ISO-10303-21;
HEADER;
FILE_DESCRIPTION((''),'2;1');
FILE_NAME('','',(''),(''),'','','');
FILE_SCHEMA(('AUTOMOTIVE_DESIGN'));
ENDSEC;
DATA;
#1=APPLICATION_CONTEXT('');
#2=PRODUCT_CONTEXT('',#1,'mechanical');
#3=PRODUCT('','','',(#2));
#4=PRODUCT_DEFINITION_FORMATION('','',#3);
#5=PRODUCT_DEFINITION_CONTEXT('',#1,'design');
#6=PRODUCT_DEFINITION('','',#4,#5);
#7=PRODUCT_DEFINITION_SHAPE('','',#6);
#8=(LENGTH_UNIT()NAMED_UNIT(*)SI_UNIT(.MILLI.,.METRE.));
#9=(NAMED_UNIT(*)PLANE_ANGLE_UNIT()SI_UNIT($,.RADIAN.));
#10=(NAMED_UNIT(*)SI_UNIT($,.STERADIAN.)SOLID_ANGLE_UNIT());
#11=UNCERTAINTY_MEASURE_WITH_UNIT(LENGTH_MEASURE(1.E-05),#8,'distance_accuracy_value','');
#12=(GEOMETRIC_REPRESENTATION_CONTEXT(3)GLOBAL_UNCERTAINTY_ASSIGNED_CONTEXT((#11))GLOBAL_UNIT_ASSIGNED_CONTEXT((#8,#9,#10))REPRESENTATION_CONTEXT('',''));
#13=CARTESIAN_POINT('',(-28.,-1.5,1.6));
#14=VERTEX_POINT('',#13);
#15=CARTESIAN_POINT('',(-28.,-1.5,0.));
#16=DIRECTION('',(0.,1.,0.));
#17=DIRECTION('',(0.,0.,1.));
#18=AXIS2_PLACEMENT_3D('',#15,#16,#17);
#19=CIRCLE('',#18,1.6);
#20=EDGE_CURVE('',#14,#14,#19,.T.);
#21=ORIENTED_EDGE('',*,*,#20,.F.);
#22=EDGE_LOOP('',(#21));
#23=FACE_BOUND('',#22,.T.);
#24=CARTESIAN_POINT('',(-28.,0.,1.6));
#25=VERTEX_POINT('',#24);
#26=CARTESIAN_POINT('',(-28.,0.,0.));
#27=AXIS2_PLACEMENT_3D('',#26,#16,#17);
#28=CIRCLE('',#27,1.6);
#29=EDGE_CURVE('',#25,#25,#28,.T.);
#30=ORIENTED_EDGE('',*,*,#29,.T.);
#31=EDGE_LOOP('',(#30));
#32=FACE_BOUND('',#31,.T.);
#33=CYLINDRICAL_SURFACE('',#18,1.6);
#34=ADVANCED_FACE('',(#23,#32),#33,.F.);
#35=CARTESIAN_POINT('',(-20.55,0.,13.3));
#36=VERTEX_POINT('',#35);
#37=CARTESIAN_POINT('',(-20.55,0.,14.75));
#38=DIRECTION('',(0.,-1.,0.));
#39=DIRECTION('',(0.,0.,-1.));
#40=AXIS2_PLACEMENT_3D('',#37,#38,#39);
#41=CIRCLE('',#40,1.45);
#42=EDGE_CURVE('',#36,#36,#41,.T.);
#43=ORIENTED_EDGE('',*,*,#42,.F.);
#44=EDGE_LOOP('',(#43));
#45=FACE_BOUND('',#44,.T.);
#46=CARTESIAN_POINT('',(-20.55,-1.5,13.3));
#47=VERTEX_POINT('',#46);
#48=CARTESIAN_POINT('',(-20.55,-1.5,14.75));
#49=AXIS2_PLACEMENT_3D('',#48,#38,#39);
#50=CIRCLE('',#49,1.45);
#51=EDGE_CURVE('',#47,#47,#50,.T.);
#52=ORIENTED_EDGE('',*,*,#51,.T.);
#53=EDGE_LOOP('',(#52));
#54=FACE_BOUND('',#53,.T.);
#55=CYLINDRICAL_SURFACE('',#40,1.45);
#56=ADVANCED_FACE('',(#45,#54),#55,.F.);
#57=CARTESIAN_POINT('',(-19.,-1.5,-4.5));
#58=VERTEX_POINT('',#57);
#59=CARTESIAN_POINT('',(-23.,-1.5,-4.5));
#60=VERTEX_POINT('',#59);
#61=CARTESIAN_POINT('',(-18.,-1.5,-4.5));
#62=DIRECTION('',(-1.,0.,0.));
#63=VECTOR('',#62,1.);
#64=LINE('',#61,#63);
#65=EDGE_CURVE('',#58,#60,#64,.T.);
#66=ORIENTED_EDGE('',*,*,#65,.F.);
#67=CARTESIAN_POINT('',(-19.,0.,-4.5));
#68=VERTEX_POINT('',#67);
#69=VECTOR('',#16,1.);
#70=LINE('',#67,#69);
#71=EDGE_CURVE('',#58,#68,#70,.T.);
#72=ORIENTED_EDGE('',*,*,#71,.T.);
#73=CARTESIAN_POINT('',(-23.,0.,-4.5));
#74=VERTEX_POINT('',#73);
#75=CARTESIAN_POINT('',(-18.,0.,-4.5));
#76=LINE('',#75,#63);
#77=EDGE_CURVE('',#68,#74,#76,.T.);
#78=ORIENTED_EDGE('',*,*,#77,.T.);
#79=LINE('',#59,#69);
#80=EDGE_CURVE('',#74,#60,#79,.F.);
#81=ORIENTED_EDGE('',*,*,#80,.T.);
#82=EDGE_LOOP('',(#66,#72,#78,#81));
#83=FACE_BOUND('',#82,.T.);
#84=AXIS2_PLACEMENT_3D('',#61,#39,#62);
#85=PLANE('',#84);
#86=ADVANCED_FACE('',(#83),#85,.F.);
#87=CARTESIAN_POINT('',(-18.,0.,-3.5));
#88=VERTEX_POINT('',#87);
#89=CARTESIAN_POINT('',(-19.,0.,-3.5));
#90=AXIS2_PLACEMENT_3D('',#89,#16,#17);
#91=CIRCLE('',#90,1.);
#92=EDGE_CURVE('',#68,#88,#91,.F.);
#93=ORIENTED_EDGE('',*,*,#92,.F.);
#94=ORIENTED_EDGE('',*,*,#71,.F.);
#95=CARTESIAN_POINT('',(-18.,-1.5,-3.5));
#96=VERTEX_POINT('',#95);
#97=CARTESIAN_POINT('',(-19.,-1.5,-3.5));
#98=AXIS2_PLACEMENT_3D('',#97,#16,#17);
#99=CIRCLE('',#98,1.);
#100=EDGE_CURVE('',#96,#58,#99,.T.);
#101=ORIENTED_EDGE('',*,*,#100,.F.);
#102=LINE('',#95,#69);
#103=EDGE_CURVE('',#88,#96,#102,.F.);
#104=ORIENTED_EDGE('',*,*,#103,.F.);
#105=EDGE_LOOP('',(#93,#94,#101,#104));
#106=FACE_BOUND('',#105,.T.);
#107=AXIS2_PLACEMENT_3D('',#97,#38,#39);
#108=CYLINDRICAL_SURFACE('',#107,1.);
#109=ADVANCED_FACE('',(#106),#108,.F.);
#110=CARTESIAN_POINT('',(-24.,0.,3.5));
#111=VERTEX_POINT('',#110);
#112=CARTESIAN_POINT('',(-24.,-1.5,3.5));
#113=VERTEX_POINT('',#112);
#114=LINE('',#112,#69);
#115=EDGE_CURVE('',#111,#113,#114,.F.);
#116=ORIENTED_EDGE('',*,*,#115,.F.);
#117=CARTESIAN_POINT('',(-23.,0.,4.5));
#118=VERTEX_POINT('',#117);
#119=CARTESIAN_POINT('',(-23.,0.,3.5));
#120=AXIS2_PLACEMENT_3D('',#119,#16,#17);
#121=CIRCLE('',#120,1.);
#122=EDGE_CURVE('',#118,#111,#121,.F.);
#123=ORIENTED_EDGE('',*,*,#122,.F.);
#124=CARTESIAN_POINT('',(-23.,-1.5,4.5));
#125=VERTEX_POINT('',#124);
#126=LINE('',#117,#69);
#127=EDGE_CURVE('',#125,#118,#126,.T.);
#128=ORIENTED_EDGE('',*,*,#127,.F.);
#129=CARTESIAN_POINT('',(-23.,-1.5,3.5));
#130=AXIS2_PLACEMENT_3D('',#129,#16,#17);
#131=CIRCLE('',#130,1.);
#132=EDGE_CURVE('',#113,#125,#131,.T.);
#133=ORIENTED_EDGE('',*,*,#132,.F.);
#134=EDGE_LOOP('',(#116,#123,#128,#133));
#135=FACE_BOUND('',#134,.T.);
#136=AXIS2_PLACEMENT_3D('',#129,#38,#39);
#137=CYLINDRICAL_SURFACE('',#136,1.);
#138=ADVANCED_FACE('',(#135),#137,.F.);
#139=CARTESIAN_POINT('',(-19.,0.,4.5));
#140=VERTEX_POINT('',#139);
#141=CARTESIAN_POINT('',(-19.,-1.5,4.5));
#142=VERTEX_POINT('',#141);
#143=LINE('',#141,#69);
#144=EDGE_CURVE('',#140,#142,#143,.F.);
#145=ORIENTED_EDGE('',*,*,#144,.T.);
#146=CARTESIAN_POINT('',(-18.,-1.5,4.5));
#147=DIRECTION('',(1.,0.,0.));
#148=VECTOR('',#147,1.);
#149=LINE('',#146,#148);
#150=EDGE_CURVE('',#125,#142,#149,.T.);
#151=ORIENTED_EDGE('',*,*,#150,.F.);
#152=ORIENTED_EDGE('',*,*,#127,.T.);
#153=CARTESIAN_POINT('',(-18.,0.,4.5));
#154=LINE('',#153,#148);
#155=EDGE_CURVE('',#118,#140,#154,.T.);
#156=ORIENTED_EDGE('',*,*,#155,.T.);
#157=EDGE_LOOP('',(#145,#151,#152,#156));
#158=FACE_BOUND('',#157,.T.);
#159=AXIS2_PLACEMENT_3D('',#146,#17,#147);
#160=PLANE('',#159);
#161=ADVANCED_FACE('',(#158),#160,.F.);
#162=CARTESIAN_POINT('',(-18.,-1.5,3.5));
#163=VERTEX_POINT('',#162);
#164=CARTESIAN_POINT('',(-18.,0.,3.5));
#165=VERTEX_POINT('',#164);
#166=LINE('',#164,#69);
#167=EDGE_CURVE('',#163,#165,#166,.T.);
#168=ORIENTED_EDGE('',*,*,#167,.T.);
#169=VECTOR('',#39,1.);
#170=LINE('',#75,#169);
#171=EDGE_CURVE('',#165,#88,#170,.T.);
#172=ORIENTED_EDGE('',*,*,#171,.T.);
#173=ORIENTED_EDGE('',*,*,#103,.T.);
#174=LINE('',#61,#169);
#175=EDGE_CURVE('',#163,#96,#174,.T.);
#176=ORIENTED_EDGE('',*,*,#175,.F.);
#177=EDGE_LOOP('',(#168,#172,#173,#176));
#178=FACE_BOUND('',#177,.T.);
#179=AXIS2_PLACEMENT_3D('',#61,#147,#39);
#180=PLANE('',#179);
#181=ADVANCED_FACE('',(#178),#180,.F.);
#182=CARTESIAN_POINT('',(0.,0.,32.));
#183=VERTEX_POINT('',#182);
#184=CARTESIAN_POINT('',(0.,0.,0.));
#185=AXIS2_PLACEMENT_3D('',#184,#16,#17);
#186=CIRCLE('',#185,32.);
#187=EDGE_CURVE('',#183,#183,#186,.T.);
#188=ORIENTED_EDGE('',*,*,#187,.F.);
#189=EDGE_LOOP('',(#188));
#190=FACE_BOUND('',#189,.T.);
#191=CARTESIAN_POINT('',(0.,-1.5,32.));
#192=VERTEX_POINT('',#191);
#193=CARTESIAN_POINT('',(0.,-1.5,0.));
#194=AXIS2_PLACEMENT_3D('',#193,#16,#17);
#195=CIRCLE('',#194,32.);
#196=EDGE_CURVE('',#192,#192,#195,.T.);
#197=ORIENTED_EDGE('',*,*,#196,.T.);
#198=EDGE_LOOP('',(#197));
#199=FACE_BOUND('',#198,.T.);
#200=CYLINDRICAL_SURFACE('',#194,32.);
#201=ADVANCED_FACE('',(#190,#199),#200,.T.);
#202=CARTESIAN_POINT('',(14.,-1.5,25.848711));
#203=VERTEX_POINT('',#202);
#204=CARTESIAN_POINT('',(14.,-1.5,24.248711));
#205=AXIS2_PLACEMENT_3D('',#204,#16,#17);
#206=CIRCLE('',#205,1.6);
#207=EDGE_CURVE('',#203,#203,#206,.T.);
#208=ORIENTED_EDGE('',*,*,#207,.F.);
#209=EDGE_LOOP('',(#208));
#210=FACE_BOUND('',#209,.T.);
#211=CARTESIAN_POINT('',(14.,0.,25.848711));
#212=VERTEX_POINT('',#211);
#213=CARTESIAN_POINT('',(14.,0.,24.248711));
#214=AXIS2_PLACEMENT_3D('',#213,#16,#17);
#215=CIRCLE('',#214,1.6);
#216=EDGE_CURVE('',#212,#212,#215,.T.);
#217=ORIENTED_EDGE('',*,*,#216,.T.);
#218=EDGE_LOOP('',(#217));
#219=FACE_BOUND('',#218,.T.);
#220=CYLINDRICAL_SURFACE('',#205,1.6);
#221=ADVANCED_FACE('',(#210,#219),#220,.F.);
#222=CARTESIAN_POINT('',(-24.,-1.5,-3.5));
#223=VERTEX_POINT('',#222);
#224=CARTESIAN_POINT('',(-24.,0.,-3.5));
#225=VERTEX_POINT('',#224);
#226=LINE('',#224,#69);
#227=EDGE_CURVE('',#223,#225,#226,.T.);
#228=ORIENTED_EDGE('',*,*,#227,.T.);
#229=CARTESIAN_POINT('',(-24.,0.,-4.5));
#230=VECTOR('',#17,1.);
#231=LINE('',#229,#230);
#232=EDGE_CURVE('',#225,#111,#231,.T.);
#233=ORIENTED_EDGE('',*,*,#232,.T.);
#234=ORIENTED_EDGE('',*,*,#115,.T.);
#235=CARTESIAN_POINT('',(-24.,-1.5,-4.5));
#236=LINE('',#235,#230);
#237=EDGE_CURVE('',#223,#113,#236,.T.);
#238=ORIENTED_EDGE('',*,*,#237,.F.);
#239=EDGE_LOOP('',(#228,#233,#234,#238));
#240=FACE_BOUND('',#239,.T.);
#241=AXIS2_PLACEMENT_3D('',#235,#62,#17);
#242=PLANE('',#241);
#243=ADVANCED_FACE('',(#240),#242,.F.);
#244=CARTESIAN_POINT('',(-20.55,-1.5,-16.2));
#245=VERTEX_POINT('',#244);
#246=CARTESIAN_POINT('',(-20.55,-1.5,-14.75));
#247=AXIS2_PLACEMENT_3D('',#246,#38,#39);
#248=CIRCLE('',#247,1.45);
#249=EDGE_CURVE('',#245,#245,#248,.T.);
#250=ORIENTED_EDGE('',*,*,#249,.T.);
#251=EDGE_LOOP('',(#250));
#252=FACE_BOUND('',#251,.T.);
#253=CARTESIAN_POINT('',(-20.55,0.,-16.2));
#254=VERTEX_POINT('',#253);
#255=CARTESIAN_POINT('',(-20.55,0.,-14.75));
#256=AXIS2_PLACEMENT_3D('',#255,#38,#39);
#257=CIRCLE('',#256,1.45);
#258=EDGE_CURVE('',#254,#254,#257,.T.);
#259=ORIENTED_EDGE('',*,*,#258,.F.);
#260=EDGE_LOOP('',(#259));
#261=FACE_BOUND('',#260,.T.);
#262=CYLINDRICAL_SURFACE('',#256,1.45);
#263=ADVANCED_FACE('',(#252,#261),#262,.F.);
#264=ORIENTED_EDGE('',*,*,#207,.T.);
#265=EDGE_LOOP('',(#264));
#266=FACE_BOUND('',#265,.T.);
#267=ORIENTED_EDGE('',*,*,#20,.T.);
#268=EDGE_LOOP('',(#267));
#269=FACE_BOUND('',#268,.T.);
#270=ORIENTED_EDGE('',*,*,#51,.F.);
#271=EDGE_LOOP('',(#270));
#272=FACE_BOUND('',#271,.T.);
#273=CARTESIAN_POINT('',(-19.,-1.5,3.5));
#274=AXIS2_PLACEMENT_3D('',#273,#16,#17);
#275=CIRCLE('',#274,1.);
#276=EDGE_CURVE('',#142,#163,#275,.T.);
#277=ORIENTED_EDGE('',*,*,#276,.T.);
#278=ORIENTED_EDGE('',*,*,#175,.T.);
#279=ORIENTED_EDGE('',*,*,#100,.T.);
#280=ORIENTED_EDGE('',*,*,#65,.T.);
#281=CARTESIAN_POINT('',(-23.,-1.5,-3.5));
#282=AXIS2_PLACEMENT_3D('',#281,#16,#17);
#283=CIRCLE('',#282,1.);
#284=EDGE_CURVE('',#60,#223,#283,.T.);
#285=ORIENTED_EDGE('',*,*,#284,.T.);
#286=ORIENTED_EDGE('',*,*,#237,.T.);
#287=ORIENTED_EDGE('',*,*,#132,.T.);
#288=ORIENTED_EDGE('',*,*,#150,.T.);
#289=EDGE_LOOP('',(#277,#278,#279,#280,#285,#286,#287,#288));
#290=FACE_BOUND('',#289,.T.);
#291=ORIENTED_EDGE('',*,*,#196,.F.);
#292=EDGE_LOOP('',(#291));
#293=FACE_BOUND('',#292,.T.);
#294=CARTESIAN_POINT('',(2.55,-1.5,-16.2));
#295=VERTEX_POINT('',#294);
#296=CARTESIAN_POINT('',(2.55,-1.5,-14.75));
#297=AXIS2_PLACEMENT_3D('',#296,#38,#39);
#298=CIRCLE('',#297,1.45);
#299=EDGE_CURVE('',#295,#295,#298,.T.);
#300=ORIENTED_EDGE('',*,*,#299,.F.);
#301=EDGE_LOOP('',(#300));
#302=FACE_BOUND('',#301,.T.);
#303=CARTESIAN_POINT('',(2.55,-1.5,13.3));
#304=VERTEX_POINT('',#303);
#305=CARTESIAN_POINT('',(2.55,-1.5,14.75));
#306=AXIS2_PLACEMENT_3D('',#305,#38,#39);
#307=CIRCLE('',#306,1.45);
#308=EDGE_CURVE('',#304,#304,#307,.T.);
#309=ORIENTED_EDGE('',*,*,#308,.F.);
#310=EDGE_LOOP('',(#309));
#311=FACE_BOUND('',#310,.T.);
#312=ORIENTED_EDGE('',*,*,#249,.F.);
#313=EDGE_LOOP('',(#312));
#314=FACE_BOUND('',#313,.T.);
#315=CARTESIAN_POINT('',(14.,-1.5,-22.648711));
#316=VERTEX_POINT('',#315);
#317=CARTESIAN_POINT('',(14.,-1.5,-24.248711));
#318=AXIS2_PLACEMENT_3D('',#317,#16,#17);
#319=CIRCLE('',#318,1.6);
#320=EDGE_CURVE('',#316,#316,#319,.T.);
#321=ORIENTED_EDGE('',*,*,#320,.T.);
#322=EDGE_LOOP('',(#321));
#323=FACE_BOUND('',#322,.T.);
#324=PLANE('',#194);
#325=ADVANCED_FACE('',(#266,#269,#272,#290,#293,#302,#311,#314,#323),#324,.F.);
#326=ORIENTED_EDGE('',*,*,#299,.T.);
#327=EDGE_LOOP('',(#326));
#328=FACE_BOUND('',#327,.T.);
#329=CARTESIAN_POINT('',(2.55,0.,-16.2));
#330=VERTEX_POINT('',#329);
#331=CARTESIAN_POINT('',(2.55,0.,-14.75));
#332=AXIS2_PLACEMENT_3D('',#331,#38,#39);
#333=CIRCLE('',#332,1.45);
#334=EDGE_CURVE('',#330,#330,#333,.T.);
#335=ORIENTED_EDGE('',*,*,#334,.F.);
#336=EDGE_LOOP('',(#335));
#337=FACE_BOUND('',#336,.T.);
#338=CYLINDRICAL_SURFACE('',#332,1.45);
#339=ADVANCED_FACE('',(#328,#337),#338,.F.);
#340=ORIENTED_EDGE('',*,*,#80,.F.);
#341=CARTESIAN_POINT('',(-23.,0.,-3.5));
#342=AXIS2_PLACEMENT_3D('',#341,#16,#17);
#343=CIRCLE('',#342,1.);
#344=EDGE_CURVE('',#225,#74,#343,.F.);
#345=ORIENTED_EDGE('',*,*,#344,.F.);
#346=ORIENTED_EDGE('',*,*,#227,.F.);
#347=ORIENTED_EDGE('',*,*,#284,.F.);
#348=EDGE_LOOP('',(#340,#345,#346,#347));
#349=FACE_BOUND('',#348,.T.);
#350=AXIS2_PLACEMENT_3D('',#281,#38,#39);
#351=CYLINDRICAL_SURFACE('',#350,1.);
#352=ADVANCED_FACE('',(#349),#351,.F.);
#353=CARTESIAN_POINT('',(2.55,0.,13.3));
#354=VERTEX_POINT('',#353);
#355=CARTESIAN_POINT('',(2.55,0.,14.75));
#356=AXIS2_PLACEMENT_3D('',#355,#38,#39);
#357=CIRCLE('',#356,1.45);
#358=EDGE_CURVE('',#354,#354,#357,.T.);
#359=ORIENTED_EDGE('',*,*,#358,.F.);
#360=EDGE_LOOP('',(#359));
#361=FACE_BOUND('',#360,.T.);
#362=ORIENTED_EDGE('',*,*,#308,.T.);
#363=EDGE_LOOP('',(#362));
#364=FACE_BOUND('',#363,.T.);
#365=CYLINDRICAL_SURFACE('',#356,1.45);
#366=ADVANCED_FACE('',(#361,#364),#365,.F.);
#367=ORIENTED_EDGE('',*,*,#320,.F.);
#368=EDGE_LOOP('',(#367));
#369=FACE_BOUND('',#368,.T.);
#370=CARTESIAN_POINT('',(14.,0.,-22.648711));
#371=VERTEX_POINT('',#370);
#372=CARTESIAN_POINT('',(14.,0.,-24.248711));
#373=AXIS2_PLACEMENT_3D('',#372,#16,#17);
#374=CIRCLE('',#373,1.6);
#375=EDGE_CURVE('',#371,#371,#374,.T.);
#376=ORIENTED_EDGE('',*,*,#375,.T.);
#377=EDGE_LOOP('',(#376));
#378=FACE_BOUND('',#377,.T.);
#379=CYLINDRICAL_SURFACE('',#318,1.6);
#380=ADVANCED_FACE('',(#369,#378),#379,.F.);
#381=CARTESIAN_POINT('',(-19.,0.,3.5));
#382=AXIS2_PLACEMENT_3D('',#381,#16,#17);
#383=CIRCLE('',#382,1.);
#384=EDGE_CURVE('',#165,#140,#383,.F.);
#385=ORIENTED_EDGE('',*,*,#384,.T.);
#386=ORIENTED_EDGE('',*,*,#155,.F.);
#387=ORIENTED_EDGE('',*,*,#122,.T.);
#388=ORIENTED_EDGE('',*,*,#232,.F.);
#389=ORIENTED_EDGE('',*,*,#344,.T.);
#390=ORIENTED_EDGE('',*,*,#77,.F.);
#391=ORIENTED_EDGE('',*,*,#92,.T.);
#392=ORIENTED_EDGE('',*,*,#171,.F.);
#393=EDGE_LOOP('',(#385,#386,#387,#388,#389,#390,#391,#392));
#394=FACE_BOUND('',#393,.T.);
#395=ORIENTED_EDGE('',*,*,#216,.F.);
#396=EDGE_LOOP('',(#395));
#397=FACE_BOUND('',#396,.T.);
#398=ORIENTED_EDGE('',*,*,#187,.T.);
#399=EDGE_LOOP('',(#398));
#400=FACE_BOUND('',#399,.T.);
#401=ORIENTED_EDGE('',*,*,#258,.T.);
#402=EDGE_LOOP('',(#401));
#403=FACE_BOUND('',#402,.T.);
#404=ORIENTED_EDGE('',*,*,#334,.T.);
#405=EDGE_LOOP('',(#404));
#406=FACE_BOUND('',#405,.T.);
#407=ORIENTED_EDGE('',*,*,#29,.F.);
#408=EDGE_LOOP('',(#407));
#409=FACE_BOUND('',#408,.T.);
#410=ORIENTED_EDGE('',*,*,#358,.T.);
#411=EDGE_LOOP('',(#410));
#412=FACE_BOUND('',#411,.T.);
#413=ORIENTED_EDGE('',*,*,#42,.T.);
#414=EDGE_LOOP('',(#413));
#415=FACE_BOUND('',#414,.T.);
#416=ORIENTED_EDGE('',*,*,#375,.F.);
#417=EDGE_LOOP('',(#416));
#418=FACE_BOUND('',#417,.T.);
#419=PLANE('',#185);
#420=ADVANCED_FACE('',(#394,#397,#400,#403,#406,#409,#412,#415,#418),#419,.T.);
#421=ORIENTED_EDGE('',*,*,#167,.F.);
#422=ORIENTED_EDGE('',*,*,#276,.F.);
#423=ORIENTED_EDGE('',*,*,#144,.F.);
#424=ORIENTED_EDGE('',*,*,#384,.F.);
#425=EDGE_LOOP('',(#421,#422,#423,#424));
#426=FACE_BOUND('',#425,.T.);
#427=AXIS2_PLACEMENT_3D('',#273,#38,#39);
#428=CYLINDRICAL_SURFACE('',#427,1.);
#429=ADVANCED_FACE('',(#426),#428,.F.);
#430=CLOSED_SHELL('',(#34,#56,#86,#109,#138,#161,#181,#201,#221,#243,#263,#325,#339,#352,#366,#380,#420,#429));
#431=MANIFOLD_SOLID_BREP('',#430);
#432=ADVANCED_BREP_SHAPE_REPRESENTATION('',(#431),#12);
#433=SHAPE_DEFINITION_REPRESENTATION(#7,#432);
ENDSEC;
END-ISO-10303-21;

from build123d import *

# Parameters (mm, degrees)
SKETCH1_R          = 32
BASE_FLANGE1_DEPTH = 1.5
SKETCH6_R          = 1.6
CUT_EXTRUDE1_DEPTH = 46.279686395
SKETCH7_W          = 6
SKETCH7_H          = 9
CUT_EXTRUDE2_DEPTH = 46.279686395
FILLET1_R          = 1
SKETCH8_R          = 1.45
CUT_EXTRUDE3_DEPTH = 46.279686395


# Sheet-metal steps are written as plain solids
with BuildPart() as part:
    # Sketch1 → Base-Flange1 (new body)
    with BuildSketch(Plane(origin=(0, 0, 0), x_dir=(1, 0, 0), z_dir=(0, 1, 0))):
        with Locations(Location((0, 0, 0), (0, 0, 270))):
            Circle(SKETCH1_R)
    extrude(amount=-BASE_FLANGE1_DEPTH)

    # Sketch6 → Cut-Extrude1 (cut, through all)
    with BuildSketch(Plane(origin=(0, 0, 0), x_dir=(1, 0, 0), z_dir=(0, 1, 0))):
        with Locations(Location((-28, 0, 0), (0, 0, 270))):
            Circle(SKETCH6_R)
        with Locations(Location((14, 24.248711306, 0), (0, 0, 270))):
            Circle(SKETCH6_R)
        with Locations(Location((14, -24.248711306, 0), (0, 0, 270))):
            Circle(SKETCH6_R)
    extrude(amount=-CUT_EXTRUDE1_DEPTH, mode=Mode.SUBTRACT)

    # Sketch7 → Cut-Extrude2 (cut, through all)
    with BuildSketch(Plane(origin=(0, 0, 0), x_dir=(1, 0, 0), z_dir=(0, 1, 0))):
        with Locations((-21, 0)):
            Rectangle(SKETCH7_W, SKETCH7_H)
    extrude(amount=-CUT_EXTRUDE2_DEPTH, mode=Mode.SUBTRACT)

    # Fillet1
    fillet1_edges = [part.edges().sort_by_distance(p)[0] for p in [
        (-18, -0.75, -4.5),
        (-18, -0.75, 4.5),
        (-24, -0.75, 4.5),
        (-24, -0.75, -4.5),
    ]]
    fillet(fillet1_edges, radius=FILLET1_R)

    # Sketch8 → Cut-Extrude3 (cut, through all)
    with BuildSketch(Plane.XZ.offset(1.5)):
        with Locations(Location((2.55, -14.75, 0), (0, 0, 270))):
            Circle(SKETCH8_R)
        with Locations(Location((2.55, 14.75, 0), (0, 0, 270))):
            Circle(SKETCH8_R)
        with Locations(Location((-20.55, 14.75, 0), (0, 0, 270))):
            Circle(SKETCH8_R)
        with Locations(Location((-20.55, -14.75, 0), (0, 0, 270))):
            Circle(SKETCH8_R)
    extrude(amount=-CUT_EXTRUDE3_DEPTH, mode=Mode.SUBTRACT)


solid = part.part
